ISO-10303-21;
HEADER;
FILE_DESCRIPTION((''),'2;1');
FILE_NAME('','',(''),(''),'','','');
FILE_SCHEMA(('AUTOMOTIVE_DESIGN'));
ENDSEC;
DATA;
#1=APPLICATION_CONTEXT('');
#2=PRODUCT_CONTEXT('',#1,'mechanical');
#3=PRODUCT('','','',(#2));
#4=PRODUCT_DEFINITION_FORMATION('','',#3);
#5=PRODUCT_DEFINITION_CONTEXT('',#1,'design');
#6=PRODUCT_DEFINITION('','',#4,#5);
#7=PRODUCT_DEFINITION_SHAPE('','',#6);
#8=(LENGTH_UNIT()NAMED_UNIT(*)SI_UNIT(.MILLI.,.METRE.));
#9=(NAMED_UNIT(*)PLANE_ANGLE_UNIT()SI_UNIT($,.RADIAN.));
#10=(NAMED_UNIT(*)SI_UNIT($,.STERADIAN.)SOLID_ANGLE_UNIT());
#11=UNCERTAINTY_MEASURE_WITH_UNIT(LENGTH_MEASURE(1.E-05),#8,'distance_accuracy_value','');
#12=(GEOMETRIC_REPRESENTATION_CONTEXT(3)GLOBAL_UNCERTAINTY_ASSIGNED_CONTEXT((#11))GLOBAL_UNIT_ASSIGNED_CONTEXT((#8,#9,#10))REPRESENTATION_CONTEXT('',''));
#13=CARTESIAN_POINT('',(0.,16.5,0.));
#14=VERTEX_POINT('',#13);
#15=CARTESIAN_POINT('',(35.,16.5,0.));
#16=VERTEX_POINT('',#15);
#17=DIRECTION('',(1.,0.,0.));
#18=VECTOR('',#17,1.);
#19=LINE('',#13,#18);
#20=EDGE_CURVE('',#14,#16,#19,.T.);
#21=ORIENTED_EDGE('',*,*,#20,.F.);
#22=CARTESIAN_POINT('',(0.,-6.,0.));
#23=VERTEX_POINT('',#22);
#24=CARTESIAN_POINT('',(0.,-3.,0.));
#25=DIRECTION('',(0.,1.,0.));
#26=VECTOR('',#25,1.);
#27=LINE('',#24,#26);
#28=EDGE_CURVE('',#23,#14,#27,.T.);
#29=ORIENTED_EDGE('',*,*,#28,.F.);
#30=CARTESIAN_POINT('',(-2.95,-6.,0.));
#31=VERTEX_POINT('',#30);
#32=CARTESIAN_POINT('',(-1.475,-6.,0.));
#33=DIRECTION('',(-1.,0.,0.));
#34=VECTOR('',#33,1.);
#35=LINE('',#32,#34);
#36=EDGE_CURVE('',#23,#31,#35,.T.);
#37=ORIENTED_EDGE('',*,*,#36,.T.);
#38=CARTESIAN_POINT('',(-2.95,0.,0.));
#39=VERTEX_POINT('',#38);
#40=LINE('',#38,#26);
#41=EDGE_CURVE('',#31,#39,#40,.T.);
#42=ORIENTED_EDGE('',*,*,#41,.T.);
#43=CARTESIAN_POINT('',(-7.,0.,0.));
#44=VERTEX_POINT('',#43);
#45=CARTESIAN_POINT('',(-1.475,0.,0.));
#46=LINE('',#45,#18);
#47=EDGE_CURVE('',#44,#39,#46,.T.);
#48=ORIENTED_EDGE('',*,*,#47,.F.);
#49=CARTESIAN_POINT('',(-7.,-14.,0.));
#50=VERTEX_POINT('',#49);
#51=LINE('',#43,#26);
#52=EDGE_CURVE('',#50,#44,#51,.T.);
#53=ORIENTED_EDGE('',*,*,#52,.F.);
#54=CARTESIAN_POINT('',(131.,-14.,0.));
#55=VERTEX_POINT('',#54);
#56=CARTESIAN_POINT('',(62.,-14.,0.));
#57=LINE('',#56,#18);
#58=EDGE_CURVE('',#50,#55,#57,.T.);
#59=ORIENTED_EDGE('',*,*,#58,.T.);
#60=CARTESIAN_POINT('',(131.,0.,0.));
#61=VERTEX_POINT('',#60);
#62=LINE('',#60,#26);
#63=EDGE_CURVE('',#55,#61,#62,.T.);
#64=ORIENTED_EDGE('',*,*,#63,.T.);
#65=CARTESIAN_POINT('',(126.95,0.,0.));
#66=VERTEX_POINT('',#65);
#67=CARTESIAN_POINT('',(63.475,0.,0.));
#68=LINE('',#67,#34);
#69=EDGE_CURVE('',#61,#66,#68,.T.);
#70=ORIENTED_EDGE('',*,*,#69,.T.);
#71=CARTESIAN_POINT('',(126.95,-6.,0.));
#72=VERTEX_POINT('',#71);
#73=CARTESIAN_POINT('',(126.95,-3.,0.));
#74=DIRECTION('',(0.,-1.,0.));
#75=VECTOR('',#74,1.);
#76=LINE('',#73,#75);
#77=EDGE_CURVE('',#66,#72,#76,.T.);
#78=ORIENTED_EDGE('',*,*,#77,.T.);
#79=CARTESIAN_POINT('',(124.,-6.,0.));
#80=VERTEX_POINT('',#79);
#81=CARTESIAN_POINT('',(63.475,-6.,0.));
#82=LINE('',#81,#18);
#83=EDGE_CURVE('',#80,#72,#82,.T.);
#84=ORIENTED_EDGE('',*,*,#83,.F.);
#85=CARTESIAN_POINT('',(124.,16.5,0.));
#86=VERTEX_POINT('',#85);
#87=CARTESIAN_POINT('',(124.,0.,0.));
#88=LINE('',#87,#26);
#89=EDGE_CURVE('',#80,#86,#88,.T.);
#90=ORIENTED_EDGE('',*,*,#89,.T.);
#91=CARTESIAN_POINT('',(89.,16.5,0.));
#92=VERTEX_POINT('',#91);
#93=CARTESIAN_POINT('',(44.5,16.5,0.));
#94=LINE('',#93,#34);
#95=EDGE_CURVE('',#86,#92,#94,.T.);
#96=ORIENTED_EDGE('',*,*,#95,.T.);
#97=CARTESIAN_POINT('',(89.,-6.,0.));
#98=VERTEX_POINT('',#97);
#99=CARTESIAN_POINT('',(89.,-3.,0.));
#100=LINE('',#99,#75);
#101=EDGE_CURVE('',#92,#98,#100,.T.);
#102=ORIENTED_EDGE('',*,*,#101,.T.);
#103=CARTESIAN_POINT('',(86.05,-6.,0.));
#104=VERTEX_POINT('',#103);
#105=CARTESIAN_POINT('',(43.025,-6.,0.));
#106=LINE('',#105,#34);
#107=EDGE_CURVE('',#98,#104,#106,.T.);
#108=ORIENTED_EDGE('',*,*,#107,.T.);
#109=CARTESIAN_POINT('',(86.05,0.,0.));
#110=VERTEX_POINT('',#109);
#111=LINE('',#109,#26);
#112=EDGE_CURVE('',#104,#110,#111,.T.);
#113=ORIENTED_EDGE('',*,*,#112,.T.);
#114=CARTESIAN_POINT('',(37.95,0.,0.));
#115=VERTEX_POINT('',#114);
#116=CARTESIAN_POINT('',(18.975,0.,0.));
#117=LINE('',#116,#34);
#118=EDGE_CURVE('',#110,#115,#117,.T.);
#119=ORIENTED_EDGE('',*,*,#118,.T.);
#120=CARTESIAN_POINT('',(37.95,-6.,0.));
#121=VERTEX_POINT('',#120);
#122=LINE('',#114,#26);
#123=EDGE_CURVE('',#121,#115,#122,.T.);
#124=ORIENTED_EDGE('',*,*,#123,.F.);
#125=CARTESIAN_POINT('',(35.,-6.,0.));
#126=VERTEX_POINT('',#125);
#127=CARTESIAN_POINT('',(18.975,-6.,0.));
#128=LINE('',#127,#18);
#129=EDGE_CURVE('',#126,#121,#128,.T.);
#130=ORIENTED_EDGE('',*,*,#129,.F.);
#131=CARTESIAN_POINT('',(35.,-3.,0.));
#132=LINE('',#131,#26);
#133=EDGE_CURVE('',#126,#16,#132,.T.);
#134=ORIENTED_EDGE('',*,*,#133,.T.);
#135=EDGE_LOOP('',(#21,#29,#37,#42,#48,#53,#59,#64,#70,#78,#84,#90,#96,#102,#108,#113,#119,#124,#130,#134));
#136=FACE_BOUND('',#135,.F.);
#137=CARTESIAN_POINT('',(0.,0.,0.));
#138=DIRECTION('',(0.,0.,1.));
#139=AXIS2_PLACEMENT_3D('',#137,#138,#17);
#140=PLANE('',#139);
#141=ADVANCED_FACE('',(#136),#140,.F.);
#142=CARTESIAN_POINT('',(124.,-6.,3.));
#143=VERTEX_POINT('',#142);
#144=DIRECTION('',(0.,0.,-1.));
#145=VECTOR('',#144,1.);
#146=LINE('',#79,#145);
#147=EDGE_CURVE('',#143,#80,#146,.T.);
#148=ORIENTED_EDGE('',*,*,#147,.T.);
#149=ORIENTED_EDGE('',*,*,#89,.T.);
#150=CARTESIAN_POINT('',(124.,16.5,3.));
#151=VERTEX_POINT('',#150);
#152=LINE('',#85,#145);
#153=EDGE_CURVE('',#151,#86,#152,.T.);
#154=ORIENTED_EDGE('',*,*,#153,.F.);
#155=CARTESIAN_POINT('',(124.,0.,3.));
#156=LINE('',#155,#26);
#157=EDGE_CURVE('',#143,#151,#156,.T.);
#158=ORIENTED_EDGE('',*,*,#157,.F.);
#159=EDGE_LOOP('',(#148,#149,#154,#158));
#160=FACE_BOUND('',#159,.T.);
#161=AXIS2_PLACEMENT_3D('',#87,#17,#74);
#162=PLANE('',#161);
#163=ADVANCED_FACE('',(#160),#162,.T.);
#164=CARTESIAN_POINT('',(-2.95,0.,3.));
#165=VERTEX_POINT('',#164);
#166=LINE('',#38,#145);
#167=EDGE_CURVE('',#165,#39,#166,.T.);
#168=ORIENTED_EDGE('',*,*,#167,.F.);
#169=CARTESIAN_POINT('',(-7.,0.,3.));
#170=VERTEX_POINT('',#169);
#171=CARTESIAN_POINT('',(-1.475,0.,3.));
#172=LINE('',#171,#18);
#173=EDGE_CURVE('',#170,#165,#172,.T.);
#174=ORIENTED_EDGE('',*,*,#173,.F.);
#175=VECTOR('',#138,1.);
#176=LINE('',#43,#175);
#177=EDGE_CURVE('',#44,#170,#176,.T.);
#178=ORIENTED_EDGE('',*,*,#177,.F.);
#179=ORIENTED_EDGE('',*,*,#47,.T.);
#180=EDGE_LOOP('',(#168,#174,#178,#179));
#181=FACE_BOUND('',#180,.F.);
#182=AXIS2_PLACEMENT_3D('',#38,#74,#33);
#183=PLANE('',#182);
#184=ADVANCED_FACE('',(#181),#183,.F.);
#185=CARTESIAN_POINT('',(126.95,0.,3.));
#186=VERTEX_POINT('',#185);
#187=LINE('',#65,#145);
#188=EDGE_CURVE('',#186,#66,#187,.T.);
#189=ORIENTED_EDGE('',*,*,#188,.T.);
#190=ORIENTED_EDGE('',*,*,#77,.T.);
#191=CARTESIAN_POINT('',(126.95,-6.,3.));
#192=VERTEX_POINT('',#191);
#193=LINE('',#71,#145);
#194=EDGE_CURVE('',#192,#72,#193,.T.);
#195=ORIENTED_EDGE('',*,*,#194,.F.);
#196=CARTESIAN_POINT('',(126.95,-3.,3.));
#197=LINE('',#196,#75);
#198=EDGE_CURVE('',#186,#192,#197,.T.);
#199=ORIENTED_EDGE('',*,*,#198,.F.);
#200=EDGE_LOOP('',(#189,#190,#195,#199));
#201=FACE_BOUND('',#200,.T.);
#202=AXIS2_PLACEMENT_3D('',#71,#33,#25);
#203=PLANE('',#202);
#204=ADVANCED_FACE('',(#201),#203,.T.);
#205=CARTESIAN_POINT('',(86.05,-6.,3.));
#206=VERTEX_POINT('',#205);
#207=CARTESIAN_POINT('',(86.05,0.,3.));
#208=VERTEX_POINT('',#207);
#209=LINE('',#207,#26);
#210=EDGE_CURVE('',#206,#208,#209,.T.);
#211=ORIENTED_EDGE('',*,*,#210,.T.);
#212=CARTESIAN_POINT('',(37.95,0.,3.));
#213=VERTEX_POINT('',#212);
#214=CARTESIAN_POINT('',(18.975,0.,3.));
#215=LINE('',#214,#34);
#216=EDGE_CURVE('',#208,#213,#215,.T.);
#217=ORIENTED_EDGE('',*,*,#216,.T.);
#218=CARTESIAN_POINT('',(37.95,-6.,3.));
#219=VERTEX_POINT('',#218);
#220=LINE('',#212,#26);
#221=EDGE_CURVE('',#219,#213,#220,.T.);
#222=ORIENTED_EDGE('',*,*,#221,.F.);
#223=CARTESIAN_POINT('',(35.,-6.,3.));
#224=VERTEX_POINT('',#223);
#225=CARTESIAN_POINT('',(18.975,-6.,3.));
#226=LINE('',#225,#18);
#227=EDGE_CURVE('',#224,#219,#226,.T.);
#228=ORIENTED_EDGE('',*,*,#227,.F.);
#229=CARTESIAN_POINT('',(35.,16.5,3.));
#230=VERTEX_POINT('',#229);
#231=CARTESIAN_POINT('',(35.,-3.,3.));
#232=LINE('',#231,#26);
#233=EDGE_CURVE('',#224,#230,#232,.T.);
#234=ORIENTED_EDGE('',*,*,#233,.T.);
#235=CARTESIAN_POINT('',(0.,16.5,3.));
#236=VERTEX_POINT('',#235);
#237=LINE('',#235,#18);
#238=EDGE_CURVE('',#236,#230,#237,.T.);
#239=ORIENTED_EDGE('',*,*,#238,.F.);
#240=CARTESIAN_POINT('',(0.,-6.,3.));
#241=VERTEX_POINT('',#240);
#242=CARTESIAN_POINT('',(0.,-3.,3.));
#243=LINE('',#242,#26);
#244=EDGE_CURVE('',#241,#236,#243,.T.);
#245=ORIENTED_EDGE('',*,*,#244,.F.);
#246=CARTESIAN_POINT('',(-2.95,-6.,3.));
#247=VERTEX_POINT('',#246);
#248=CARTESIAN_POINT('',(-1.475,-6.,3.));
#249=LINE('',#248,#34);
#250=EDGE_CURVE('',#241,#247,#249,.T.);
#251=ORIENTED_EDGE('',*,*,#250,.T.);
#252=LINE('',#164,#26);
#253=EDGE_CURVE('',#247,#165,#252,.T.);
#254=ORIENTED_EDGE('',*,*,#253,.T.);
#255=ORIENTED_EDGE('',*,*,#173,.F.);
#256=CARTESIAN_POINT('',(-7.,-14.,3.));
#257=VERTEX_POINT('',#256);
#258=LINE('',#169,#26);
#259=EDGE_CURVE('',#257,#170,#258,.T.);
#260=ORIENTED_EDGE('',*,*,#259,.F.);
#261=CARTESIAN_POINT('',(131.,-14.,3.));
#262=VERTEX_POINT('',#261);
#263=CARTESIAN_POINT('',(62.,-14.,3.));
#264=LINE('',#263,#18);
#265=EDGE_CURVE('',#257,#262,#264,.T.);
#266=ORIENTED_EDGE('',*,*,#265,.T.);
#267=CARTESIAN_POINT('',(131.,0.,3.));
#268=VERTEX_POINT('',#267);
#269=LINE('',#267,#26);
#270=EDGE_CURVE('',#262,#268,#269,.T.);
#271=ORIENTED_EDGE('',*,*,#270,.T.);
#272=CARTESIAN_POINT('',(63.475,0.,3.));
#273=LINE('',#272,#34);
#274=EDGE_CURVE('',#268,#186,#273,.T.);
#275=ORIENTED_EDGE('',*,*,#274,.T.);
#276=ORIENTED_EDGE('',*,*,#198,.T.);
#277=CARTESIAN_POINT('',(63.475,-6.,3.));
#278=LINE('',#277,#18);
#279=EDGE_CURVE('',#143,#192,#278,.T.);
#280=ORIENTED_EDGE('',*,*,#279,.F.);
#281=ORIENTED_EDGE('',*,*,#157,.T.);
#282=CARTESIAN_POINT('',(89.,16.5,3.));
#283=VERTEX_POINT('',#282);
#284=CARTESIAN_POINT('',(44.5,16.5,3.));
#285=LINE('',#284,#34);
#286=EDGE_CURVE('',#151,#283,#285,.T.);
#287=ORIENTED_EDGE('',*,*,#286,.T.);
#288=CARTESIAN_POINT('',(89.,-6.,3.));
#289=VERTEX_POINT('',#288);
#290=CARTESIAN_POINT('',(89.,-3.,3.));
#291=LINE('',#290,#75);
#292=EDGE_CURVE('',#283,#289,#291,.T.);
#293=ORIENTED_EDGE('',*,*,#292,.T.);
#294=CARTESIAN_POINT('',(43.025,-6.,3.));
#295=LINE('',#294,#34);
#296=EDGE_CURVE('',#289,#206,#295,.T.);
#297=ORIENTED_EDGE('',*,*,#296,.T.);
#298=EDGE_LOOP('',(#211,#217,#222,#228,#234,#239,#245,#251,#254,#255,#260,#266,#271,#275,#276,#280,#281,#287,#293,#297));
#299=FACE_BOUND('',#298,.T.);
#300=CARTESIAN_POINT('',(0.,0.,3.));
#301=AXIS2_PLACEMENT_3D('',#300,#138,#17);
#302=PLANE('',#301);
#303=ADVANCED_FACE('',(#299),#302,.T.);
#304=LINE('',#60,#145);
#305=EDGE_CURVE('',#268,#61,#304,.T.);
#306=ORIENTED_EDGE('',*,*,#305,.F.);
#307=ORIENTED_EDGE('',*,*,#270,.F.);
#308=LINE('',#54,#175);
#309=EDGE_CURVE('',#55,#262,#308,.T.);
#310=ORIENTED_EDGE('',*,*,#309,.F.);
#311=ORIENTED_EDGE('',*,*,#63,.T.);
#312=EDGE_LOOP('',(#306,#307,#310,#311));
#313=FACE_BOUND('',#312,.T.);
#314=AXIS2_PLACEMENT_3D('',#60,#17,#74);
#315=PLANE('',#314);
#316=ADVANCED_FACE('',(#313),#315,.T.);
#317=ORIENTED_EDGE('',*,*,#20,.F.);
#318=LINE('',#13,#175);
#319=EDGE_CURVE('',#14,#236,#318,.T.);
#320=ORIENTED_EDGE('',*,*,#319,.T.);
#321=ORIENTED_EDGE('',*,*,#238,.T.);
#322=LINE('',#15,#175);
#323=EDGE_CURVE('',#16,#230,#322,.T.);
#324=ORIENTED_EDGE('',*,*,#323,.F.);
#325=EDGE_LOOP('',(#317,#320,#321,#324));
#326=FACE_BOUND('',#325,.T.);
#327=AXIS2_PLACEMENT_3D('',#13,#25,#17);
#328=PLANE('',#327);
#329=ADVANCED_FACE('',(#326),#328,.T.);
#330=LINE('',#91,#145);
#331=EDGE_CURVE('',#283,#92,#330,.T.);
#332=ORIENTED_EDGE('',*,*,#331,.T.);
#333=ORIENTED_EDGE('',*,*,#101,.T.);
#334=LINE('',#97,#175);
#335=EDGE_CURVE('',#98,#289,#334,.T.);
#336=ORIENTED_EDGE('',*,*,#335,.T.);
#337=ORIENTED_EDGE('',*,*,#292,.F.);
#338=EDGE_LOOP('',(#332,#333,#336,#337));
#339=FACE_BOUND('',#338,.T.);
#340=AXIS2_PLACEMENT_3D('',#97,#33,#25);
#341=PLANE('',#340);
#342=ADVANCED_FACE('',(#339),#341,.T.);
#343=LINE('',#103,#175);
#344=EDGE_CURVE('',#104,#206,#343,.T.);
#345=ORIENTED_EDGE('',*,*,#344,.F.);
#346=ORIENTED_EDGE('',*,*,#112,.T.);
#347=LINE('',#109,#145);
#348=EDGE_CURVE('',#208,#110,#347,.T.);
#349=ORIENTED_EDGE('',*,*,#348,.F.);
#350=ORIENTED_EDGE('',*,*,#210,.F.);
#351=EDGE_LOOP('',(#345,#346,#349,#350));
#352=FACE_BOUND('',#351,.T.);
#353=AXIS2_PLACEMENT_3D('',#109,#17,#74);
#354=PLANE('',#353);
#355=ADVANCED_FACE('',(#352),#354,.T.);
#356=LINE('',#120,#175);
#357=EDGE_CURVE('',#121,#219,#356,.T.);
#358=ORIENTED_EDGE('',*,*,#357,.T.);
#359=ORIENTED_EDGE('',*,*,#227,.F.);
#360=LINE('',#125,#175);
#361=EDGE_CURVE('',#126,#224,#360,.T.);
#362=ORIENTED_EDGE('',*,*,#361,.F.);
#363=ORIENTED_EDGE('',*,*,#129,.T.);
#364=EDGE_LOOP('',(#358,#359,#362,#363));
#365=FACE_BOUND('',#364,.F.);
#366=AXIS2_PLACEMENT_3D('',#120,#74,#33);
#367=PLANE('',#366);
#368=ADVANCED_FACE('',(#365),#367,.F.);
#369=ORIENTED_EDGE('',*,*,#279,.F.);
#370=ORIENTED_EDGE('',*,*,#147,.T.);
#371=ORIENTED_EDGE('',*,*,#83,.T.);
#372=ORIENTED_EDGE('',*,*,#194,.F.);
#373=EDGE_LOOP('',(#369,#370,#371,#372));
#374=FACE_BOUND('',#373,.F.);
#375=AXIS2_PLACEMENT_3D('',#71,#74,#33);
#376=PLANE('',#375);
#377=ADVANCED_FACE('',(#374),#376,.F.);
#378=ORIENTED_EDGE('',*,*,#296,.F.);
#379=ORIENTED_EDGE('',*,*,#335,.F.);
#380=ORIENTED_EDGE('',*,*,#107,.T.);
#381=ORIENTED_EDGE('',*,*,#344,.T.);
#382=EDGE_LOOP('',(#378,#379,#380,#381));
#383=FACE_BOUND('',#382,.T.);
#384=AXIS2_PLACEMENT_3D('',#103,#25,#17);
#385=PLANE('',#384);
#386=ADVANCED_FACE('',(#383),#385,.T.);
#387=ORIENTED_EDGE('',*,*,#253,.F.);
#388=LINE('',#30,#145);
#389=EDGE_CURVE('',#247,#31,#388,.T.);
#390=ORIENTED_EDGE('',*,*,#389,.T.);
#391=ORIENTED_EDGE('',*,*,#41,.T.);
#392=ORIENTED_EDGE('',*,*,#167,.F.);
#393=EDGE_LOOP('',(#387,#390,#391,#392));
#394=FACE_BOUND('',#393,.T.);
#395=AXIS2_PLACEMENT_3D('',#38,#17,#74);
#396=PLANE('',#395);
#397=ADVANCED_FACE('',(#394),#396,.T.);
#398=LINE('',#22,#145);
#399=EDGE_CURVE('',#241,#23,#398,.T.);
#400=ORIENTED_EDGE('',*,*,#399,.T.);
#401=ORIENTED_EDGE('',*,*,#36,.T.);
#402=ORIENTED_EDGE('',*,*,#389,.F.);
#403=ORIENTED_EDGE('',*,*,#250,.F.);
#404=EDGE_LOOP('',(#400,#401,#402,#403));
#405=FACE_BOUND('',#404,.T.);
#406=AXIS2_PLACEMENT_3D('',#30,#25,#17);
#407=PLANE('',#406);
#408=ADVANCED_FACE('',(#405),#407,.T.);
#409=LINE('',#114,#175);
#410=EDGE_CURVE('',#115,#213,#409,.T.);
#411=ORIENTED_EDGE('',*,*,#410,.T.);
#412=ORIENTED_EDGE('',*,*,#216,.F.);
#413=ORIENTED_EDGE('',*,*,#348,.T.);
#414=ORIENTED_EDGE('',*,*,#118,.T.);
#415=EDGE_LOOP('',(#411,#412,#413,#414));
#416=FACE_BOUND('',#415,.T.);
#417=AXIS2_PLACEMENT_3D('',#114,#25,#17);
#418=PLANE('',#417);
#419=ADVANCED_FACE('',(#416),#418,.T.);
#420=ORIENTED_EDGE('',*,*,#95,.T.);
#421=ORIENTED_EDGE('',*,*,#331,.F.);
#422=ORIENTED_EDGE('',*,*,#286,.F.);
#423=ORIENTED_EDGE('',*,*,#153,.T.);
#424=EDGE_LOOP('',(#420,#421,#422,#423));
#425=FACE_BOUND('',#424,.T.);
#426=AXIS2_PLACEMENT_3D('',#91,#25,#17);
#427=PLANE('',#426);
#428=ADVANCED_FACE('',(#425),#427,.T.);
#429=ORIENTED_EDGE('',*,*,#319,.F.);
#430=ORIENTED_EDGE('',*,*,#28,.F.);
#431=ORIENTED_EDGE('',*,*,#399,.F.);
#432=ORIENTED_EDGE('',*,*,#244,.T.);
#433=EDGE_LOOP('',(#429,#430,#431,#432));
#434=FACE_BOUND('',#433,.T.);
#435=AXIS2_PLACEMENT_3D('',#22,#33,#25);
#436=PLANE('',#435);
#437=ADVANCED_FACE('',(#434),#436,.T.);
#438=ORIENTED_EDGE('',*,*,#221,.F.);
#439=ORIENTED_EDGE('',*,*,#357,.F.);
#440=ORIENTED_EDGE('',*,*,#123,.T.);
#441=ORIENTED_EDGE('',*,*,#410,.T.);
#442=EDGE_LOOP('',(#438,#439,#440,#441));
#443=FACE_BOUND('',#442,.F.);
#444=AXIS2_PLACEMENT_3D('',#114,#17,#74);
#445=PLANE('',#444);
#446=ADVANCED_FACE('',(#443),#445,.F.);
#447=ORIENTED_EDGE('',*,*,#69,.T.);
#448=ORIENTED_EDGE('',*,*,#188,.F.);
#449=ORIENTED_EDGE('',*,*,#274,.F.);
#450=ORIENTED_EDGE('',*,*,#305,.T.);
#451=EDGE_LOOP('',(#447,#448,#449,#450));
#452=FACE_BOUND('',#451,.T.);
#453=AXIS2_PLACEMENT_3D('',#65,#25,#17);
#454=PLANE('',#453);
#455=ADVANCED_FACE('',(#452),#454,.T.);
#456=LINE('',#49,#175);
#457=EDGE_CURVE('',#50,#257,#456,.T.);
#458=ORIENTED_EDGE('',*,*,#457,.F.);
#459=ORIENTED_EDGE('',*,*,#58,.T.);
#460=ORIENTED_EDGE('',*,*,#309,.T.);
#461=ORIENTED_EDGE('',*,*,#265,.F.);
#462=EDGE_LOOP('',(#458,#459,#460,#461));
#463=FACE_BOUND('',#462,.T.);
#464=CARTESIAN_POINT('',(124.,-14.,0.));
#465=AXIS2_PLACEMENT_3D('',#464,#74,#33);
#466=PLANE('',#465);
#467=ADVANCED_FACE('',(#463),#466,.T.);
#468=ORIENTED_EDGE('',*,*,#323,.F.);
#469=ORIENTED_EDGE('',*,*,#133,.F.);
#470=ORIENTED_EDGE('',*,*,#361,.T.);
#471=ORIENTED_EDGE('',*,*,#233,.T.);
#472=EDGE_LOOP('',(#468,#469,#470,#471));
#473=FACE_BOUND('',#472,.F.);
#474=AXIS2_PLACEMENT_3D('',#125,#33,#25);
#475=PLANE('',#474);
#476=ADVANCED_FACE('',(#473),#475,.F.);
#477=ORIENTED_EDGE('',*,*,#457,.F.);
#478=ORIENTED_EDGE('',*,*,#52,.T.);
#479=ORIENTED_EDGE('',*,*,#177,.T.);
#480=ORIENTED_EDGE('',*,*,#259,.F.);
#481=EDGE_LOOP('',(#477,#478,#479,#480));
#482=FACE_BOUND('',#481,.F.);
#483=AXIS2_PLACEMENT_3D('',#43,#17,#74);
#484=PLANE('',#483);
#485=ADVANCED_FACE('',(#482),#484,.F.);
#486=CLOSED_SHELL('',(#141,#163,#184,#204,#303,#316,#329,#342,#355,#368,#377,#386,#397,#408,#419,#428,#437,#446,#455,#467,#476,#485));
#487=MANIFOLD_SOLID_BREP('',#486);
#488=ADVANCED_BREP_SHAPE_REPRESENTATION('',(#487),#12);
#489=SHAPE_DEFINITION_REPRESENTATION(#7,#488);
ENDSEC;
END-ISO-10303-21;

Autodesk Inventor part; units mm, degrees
ref_plane "YZ Plane" through (0, 0, 0) normal (1, 0, 0) x (0, 1, 0)
ref_plane "XZ Plane" through (0, 0, 0) normal (0, 1, 0) x (-1, 0, 0)
ref_plane "XY Plane" through (0, 0, 0) normal (0, 0, 1) x (1, 0, 0)
sketch "草圖1" plane through (0, 0, 0) normal (0, 0, 1) x (1, 0, 0)
  line L0 (0, 0) -> (124, 0)
  line L1 (124, 0) -> (124, -14) construction
  line L2 (124, -14) -> (0, -14)
  line L3 (0, -14) -> (0, 0) construction
  line L4 (35, 0) -> (37.95, 0)
  line L5 (37.95, 0) -> (37.95, -6)
  line L6 (37.95, -6) -> (35, -6)
  line L7 (35, -6) -> (35, 0)
  line L8 (89, 0) -> (86.05, 0)
  line L9 (86.05, 0) -> (86.05, -6)
  line L10 (86.05, -6) -> (89, -6)
  line L11 (89, -6) -> (89, 0)
  line L12 (131, -14) -> (126.95, -14)
  line L13 (124, 0) -> (131, 0)
  line L14 (131, 0) -> (131, -14)
  line L15 (126.95, -14) -> (126.95, -6)
  line L16 (126.95, -6) -> (124, -6)
  line L17 (0, 0) -> (-7, 0)
  line L18 (-7, 0) -> (-7, -14)
  line L19 (-7, -14) -> (-2.95, -14)
  line L20 (0, -14) -> (0, 0) construction
  line L21 (-2.95, -14) -> (-2.95, -6)
  line L22 (-2.95, -6) -> (0, -6)
  line L23 (0, -6) -> (0, -14)
  line L24 (124, -6) -> (124, -14)
  line L25 (124, -14) -> (126.95, -14)
  line L26 (124, -6) -> (126.95, -6)
  line L27 (126.95, -6) -> (126.95, 0)
  line L28 (126.95, 0) -> (124, 0)
  line L29 (124, 0) -> (124, -6)
  line L30 (-2.95, -14) -> (0, -14)
  line L31 (-2.95, -6) -> (0, -6)
  line L32 (0, -6) -> (0, 0)
  line L33 (0, 0) -> (-2.95, 0)
  line L34 (-2.95, 0) -> (-2.95, -6)
  point P0 (0, -15.5)
  point P1 (0, -6)
  point P2 (0, -14)
  dimension "d0" = 124
  dimension "d1" = 35
  dimension "d3" = 2.95
  dimension "d4" = 2.95
  dimension "d10" = 8
  dimension "d16" = 6
  dimension "d17" = 35
  dimension "d18" = 2.95
  dimension "d21" = 7
  dimension "d22" = 2.95
  dimension "d24" = 7
  dimension "d29" = 6
  dimension "d30" = 6
extrude "擠出1" add sketch "草圖1" along normal blind 3 contours L0 L7 L6 L5 L9 L10 L11 L29 L24 L2 L23 L32 | L34 L21 L19 L18 L17 | L23 L30 L21 L22 | L24 L16 L15 L25 | L15 L27 L13 L14 L12
move faces "移動2" translate (0, 16.5, 0) faces at (23.3333, 0, 1) (112.3333, 0, 1)
properties part number "chassis_1_7"
